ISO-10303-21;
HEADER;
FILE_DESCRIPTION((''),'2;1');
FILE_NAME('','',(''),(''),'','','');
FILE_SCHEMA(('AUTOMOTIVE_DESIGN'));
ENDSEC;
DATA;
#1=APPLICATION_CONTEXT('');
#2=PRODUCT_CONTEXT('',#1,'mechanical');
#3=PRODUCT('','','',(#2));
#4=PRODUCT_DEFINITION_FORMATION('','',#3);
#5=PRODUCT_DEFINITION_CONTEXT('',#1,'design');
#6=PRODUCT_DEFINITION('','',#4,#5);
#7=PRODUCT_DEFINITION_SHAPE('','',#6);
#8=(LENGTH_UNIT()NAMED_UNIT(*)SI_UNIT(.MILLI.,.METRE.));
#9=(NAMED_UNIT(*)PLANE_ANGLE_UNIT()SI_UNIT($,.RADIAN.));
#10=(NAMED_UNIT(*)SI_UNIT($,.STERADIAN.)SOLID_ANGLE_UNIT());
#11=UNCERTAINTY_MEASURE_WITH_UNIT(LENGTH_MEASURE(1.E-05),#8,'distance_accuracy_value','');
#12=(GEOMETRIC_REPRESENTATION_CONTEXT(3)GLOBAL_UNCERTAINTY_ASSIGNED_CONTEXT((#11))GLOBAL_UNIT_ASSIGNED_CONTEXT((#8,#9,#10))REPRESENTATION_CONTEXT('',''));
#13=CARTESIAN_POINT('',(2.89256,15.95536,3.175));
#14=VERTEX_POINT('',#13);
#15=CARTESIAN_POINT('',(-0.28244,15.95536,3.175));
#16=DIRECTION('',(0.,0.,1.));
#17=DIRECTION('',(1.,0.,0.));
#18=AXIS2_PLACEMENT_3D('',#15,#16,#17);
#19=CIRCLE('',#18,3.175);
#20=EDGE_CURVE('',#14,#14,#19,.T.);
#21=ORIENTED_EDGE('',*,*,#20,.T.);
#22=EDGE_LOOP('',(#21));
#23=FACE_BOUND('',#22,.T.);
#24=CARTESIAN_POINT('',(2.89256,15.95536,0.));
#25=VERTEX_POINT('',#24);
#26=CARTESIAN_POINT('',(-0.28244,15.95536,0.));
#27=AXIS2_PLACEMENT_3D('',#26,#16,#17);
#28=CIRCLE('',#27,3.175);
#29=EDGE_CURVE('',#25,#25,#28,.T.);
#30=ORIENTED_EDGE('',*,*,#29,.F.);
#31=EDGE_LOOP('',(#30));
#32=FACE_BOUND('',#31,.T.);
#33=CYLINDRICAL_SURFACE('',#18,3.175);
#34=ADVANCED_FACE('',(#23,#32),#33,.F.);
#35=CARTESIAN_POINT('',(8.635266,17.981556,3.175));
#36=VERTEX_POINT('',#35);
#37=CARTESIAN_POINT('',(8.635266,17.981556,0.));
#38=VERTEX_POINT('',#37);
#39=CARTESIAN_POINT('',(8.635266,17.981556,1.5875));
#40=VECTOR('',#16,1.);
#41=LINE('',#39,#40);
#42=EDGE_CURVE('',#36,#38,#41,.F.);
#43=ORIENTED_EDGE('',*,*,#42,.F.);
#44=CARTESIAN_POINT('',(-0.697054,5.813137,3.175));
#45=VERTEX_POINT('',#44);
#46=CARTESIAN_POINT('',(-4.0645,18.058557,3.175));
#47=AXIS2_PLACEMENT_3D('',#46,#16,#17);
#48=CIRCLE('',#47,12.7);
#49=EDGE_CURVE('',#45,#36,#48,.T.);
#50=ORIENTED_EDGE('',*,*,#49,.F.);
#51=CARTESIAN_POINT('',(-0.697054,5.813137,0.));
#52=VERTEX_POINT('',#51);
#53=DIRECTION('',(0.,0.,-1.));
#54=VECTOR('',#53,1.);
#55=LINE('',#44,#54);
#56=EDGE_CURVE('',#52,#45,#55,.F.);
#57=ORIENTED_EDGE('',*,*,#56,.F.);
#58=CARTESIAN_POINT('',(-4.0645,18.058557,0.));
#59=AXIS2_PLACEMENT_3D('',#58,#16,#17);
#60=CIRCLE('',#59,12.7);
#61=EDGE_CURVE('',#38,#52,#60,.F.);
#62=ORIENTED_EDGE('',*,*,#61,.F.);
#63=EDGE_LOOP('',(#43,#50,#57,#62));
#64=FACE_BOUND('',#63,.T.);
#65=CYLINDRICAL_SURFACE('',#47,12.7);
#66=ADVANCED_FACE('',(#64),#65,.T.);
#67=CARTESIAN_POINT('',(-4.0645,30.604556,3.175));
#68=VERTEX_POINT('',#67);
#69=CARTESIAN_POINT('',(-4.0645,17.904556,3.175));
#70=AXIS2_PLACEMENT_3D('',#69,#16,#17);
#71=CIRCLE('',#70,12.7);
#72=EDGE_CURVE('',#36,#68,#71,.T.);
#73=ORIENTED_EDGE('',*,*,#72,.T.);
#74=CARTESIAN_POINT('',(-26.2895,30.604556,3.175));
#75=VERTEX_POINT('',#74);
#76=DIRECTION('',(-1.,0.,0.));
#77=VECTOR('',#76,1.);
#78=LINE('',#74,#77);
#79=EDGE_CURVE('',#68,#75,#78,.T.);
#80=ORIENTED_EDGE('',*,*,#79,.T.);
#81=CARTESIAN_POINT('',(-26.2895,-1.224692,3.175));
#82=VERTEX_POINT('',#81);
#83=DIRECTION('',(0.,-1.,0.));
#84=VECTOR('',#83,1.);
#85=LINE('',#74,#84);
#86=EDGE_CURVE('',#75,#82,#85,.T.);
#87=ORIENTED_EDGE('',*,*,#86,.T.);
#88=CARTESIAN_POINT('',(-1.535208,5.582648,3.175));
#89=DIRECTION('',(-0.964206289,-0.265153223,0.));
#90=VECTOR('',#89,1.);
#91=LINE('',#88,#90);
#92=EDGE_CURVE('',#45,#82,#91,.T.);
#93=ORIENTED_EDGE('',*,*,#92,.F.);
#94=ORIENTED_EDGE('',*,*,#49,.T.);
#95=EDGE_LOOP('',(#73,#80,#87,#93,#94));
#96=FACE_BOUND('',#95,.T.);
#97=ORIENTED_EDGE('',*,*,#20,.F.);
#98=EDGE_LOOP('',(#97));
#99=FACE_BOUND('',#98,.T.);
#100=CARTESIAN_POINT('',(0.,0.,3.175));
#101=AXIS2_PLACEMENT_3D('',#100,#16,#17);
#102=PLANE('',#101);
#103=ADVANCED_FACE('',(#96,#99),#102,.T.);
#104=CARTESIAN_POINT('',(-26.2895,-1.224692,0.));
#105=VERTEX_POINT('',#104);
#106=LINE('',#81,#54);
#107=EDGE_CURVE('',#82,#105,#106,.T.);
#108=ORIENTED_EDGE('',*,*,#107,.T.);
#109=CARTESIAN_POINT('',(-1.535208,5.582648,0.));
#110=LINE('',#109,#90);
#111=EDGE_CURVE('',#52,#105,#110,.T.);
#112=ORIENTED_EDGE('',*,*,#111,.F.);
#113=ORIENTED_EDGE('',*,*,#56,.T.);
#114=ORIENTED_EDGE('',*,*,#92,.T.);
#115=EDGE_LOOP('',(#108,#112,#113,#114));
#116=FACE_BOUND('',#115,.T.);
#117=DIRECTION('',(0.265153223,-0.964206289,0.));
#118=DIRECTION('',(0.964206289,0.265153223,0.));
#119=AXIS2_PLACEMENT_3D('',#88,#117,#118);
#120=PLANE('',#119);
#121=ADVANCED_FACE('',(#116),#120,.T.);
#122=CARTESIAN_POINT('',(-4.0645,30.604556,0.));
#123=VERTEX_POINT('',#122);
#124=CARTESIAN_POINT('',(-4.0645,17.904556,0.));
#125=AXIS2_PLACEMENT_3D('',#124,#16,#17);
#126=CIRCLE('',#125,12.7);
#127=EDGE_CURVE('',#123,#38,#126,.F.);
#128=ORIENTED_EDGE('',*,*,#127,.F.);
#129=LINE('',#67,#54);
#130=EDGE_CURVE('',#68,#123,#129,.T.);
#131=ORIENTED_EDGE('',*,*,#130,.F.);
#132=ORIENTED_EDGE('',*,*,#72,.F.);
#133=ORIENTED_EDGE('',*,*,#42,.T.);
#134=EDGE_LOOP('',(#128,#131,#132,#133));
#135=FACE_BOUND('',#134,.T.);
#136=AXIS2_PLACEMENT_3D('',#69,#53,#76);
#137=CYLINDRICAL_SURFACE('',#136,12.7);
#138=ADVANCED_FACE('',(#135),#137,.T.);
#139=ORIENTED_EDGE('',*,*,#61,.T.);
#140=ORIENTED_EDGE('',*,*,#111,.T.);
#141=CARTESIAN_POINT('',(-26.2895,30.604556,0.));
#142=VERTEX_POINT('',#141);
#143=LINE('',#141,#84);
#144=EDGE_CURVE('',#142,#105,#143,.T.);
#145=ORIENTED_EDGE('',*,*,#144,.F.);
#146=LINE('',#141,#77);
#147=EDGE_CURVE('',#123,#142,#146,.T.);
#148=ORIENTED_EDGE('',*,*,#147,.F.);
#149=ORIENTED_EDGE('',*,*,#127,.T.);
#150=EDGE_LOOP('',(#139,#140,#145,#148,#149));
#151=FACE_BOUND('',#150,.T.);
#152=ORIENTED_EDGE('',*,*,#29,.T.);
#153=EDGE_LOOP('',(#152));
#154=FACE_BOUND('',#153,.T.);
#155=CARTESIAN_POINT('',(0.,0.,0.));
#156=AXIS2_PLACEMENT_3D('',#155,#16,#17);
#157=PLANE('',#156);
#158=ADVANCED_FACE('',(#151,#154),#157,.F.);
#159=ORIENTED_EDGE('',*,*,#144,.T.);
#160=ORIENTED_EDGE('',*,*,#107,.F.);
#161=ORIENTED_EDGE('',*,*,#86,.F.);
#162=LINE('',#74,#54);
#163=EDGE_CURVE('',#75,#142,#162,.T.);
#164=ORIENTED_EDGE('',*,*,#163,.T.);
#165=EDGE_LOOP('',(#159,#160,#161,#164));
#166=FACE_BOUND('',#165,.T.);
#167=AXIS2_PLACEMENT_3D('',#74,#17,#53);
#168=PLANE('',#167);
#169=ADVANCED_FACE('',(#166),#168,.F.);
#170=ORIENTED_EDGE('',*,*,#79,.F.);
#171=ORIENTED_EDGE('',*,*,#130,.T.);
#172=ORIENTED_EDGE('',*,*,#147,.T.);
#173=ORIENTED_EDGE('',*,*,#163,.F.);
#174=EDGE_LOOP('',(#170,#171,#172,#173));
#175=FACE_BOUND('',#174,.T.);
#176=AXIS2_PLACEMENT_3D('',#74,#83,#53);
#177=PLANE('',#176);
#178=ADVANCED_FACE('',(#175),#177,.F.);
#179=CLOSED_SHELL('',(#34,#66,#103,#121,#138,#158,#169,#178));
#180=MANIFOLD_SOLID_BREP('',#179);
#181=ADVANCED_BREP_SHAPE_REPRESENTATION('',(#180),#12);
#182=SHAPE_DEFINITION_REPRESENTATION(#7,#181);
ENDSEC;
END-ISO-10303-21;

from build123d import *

# Parameters (mm, degrees)
SKETCH1_W                       = 60.458144771
SKETCH1_H                       = 61.20911147
BOSS_EXTRUDE1_DEPTH             = 3.175
F_1_4_0_25_DIAMETER_HOLE1_D     = 6.35
F_1_4_0_25_DIAMETER_HOLE1_DEPTH = 9.268267535
F_1_4_0_25_DIAMETER_HOLE1_TIP   = 1.907732465
CUT_EXTRUDE1_DEPTH              = 46.980601635
FILLET1_R                       = 12.7


with BuildPart() as part:
    # Sketch1 → Boss-Extrude1 (new body)
    with BuildSketch(Plane.XY):
        with Locations((3.939572159, 0)):
            Rectangle(SKETCH1_W, SKETCH1_H)
    extrude(amount=BOSS_EXTRUDE1_DEPTH)

    # 1/4 (0.25) Diameter Hole1
    with Locations(Plane.XY.offset(3.175)):
        with Locations((-0.282440227, 15.955359735)):
            Hole(F_1_4_0_25_DIAMETER_HOLE1_D / 2, depth=F_1_4_0_25_DIAMETER_HOLE1_DEPTH)
            with Locations((0, 0, -(F_1_4_0_25_DIAMETER_HOLE1_DEPTH + F_1_4_0_25_DIAMETER_HOLE1_TIP / 2))):  # 118° drill point
                Cone(0, F_1_4_0_25_DIAMETER_HOLE1_D / 2, F_1_4_0_25_DIAMETER_HOLE1_TIP, mode=Mode.SUBTRACT)

    # Sketch4 → Cut-Extrude1 (cut, through all)
    with BuildSketch(Plane(origin=(0, 0, 0), x_dir=(-1, 0, 0), z_dir=(0, 0, -1))):
        Polygon((26.289500227, -1.224692265), (-8.635499773, 8.379555735), (-8.635499773, 30.604555735), (-34.168644544, 30.604555735), (-34.168644544, -30.604555735), (26.289500227, -30.604555735), align=None)
    extrude(amount=-CUT_EXTRUDE1_DEPTH, mode=Mode.SUBTRACT)

    # Fillet1
    # the kernel refuses this fillet: 12.7 mm, written as the material it takes off along each edge
    with BuildSketch(Plane(origin=(8.635499773, 30.604555735, -31.75), x_dir=(-1, 0, 0), z_dir=(0, 0, 1))) as fillet1_piece_1:
        with BuildLine():
            CenterArc((FILLET1_R, FILLET1_R), FILLET1_R, 180, 90)
            Line((0, FILLET1_R), (0, 0))
            Line((0, 0), (FILLET1_R, 0))
        make_face()
    extrude(amount=66.675, mode=Mode.SUBTRACT)
    with BuildSketch(Plane(origin=(8.635499773, 8.379555735, -24.197503605), x_dir=(0, 1, 0), z_dir=(0, 0, 1))) as fillet1_piece_2:
        with BuildLine():
            CenterArc((FILLET1_R * 0.762126097799, FILLET1_R), FILLET1_R, 195.376057549, 74.623942451)
            Line((-FILLET1_R * 0.202080191414, FILLET1_R * 0.734846776671), (0, 0))
            Line((0, 0), (FILLET1_R * 0.762126097799, 0))
        make_face()
    extrude(amount=51.57000721, mode=Mode.SUBTRACT)


solid = part.part
